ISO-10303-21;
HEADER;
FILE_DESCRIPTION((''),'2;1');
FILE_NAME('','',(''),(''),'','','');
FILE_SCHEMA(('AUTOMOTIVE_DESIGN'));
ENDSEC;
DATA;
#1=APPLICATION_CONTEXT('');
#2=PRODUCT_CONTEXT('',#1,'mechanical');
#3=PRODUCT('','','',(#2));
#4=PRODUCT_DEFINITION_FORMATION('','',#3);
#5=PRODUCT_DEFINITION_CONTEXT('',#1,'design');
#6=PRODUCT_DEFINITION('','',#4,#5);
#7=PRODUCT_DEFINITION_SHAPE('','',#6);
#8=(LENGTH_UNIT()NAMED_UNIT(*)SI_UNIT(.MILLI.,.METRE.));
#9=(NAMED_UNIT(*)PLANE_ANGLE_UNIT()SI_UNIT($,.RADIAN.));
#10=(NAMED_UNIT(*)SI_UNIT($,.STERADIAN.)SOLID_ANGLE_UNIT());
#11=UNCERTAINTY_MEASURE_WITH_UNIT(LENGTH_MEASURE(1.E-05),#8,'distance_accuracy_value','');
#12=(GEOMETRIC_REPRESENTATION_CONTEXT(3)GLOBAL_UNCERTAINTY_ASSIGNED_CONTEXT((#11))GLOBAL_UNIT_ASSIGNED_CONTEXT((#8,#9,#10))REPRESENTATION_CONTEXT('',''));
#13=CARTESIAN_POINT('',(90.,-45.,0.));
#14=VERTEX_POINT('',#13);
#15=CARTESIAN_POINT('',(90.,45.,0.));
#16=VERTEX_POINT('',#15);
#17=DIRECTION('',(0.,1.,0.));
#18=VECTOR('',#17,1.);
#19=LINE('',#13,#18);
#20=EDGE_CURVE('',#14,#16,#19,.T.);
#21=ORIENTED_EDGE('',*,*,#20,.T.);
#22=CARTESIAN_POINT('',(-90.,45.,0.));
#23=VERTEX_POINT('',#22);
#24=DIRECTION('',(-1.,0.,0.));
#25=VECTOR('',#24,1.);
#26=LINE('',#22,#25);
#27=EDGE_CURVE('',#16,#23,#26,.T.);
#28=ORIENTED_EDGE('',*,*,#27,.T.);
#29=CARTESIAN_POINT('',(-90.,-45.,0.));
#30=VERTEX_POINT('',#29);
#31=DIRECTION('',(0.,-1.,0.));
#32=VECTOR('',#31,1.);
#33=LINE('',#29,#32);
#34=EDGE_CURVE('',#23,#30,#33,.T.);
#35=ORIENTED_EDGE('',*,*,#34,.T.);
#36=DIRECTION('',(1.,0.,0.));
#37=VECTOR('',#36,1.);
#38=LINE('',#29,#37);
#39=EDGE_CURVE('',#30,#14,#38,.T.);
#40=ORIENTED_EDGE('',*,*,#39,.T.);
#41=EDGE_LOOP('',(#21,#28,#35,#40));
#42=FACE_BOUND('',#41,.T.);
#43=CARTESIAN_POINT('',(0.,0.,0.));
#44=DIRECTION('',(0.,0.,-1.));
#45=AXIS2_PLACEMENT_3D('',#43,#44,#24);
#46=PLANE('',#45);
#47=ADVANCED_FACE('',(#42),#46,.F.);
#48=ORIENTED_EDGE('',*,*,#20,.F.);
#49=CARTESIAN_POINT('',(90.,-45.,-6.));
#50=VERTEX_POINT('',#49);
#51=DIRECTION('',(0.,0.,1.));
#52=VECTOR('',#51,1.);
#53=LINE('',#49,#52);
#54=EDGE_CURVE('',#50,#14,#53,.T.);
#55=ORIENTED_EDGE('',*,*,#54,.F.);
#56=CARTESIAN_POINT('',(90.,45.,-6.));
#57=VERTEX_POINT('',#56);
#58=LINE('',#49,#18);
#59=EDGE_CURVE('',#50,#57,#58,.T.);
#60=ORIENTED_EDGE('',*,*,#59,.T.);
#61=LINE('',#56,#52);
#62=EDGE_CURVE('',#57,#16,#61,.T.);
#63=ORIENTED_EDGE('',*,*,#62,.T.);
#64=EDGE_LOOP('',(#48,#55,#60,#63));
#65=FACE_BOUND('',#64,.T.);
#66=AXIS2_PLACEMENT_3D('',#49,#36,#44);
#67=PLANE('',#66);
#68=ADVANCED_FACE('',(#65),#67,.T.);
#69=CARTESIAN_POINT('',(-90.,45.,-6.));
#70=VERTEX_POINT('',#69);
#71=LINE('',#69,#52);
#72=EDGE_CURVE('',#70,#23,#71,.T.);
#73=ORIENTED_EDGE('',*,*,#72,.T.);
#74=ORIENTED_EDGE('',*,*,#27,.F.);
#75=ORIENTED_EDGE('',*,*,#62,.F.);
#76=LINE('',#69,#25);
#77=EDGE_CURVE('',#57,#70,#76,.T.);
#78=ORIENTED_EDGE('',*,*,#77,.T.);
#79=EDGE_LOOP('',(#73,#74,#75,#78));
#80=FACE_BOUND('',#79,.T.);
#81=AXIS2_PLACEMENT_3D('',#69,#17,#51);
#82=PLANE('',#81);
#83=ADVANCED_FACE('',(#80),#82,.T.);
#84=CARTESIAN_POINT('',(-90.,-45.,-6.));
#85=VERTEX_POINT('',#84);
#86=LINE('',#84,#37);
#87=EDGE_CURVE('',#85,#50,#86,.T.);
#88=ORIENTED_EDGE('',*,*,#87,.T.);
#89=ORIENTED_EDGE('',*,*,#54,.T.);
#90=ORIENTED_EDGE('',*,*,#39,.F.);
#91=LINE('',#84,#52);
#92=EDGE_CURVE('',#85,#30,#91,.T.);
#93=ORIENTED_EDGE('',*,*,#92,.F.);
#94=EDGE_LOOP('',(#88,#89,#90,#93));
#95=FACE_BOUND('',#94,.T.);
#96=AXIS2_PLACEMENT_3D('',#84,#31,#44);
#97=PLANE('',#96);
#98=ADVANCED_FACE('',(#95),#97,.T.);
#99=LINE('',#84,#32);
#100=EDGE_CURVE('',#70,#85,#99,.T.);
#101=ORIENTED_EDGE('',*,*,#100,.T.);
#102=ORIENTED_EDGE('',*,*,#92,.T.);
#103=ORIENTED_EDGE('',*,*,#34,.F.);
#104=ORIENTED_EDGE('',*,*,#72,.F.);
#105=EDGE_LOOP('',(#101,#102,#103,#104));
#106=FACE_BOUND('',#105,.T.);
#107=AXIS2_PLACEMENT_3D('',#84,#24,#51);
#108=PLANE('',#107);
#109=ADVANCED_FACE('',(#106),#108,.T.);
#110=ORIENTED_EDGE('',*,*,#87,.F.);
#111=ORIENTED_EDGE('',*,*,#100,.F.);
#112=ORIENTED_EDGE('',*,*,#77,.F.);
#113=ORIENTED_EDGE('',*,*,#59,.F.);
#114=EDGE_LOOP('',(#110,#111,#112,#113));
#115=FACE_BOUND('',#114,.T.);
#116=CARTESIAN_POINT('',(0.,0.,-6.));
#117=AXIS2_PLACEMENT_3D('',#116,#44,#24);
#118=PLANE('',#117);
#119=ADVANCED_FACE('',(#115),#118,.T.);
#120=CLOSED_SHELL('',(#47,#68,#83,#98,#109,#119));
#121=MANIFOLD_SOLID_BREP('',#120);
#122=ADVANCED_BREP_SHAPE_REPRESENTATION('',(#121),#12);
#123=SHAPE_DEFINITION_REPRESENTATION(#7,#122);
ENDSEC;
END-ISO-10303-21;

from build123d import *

# Parameters (mm, degrees)
SKETCH_1_W             = 180
SKETCH_1_H             = 90
SM_BASE_FLANGE_1_DEPTH = 6


# Sheet-metal steps are written as plain solids
with BuildPart() as part:
    # Sketch 1 → Базовая кромка1 (new body)
    with BuildSketch(Plane.XY):
        Rectangle(SKETCH_1_W, SKETCH_1_H)
    extrude(amount=-SM_BASE_FLANGE_1_DEPTH)


solid = part.part
